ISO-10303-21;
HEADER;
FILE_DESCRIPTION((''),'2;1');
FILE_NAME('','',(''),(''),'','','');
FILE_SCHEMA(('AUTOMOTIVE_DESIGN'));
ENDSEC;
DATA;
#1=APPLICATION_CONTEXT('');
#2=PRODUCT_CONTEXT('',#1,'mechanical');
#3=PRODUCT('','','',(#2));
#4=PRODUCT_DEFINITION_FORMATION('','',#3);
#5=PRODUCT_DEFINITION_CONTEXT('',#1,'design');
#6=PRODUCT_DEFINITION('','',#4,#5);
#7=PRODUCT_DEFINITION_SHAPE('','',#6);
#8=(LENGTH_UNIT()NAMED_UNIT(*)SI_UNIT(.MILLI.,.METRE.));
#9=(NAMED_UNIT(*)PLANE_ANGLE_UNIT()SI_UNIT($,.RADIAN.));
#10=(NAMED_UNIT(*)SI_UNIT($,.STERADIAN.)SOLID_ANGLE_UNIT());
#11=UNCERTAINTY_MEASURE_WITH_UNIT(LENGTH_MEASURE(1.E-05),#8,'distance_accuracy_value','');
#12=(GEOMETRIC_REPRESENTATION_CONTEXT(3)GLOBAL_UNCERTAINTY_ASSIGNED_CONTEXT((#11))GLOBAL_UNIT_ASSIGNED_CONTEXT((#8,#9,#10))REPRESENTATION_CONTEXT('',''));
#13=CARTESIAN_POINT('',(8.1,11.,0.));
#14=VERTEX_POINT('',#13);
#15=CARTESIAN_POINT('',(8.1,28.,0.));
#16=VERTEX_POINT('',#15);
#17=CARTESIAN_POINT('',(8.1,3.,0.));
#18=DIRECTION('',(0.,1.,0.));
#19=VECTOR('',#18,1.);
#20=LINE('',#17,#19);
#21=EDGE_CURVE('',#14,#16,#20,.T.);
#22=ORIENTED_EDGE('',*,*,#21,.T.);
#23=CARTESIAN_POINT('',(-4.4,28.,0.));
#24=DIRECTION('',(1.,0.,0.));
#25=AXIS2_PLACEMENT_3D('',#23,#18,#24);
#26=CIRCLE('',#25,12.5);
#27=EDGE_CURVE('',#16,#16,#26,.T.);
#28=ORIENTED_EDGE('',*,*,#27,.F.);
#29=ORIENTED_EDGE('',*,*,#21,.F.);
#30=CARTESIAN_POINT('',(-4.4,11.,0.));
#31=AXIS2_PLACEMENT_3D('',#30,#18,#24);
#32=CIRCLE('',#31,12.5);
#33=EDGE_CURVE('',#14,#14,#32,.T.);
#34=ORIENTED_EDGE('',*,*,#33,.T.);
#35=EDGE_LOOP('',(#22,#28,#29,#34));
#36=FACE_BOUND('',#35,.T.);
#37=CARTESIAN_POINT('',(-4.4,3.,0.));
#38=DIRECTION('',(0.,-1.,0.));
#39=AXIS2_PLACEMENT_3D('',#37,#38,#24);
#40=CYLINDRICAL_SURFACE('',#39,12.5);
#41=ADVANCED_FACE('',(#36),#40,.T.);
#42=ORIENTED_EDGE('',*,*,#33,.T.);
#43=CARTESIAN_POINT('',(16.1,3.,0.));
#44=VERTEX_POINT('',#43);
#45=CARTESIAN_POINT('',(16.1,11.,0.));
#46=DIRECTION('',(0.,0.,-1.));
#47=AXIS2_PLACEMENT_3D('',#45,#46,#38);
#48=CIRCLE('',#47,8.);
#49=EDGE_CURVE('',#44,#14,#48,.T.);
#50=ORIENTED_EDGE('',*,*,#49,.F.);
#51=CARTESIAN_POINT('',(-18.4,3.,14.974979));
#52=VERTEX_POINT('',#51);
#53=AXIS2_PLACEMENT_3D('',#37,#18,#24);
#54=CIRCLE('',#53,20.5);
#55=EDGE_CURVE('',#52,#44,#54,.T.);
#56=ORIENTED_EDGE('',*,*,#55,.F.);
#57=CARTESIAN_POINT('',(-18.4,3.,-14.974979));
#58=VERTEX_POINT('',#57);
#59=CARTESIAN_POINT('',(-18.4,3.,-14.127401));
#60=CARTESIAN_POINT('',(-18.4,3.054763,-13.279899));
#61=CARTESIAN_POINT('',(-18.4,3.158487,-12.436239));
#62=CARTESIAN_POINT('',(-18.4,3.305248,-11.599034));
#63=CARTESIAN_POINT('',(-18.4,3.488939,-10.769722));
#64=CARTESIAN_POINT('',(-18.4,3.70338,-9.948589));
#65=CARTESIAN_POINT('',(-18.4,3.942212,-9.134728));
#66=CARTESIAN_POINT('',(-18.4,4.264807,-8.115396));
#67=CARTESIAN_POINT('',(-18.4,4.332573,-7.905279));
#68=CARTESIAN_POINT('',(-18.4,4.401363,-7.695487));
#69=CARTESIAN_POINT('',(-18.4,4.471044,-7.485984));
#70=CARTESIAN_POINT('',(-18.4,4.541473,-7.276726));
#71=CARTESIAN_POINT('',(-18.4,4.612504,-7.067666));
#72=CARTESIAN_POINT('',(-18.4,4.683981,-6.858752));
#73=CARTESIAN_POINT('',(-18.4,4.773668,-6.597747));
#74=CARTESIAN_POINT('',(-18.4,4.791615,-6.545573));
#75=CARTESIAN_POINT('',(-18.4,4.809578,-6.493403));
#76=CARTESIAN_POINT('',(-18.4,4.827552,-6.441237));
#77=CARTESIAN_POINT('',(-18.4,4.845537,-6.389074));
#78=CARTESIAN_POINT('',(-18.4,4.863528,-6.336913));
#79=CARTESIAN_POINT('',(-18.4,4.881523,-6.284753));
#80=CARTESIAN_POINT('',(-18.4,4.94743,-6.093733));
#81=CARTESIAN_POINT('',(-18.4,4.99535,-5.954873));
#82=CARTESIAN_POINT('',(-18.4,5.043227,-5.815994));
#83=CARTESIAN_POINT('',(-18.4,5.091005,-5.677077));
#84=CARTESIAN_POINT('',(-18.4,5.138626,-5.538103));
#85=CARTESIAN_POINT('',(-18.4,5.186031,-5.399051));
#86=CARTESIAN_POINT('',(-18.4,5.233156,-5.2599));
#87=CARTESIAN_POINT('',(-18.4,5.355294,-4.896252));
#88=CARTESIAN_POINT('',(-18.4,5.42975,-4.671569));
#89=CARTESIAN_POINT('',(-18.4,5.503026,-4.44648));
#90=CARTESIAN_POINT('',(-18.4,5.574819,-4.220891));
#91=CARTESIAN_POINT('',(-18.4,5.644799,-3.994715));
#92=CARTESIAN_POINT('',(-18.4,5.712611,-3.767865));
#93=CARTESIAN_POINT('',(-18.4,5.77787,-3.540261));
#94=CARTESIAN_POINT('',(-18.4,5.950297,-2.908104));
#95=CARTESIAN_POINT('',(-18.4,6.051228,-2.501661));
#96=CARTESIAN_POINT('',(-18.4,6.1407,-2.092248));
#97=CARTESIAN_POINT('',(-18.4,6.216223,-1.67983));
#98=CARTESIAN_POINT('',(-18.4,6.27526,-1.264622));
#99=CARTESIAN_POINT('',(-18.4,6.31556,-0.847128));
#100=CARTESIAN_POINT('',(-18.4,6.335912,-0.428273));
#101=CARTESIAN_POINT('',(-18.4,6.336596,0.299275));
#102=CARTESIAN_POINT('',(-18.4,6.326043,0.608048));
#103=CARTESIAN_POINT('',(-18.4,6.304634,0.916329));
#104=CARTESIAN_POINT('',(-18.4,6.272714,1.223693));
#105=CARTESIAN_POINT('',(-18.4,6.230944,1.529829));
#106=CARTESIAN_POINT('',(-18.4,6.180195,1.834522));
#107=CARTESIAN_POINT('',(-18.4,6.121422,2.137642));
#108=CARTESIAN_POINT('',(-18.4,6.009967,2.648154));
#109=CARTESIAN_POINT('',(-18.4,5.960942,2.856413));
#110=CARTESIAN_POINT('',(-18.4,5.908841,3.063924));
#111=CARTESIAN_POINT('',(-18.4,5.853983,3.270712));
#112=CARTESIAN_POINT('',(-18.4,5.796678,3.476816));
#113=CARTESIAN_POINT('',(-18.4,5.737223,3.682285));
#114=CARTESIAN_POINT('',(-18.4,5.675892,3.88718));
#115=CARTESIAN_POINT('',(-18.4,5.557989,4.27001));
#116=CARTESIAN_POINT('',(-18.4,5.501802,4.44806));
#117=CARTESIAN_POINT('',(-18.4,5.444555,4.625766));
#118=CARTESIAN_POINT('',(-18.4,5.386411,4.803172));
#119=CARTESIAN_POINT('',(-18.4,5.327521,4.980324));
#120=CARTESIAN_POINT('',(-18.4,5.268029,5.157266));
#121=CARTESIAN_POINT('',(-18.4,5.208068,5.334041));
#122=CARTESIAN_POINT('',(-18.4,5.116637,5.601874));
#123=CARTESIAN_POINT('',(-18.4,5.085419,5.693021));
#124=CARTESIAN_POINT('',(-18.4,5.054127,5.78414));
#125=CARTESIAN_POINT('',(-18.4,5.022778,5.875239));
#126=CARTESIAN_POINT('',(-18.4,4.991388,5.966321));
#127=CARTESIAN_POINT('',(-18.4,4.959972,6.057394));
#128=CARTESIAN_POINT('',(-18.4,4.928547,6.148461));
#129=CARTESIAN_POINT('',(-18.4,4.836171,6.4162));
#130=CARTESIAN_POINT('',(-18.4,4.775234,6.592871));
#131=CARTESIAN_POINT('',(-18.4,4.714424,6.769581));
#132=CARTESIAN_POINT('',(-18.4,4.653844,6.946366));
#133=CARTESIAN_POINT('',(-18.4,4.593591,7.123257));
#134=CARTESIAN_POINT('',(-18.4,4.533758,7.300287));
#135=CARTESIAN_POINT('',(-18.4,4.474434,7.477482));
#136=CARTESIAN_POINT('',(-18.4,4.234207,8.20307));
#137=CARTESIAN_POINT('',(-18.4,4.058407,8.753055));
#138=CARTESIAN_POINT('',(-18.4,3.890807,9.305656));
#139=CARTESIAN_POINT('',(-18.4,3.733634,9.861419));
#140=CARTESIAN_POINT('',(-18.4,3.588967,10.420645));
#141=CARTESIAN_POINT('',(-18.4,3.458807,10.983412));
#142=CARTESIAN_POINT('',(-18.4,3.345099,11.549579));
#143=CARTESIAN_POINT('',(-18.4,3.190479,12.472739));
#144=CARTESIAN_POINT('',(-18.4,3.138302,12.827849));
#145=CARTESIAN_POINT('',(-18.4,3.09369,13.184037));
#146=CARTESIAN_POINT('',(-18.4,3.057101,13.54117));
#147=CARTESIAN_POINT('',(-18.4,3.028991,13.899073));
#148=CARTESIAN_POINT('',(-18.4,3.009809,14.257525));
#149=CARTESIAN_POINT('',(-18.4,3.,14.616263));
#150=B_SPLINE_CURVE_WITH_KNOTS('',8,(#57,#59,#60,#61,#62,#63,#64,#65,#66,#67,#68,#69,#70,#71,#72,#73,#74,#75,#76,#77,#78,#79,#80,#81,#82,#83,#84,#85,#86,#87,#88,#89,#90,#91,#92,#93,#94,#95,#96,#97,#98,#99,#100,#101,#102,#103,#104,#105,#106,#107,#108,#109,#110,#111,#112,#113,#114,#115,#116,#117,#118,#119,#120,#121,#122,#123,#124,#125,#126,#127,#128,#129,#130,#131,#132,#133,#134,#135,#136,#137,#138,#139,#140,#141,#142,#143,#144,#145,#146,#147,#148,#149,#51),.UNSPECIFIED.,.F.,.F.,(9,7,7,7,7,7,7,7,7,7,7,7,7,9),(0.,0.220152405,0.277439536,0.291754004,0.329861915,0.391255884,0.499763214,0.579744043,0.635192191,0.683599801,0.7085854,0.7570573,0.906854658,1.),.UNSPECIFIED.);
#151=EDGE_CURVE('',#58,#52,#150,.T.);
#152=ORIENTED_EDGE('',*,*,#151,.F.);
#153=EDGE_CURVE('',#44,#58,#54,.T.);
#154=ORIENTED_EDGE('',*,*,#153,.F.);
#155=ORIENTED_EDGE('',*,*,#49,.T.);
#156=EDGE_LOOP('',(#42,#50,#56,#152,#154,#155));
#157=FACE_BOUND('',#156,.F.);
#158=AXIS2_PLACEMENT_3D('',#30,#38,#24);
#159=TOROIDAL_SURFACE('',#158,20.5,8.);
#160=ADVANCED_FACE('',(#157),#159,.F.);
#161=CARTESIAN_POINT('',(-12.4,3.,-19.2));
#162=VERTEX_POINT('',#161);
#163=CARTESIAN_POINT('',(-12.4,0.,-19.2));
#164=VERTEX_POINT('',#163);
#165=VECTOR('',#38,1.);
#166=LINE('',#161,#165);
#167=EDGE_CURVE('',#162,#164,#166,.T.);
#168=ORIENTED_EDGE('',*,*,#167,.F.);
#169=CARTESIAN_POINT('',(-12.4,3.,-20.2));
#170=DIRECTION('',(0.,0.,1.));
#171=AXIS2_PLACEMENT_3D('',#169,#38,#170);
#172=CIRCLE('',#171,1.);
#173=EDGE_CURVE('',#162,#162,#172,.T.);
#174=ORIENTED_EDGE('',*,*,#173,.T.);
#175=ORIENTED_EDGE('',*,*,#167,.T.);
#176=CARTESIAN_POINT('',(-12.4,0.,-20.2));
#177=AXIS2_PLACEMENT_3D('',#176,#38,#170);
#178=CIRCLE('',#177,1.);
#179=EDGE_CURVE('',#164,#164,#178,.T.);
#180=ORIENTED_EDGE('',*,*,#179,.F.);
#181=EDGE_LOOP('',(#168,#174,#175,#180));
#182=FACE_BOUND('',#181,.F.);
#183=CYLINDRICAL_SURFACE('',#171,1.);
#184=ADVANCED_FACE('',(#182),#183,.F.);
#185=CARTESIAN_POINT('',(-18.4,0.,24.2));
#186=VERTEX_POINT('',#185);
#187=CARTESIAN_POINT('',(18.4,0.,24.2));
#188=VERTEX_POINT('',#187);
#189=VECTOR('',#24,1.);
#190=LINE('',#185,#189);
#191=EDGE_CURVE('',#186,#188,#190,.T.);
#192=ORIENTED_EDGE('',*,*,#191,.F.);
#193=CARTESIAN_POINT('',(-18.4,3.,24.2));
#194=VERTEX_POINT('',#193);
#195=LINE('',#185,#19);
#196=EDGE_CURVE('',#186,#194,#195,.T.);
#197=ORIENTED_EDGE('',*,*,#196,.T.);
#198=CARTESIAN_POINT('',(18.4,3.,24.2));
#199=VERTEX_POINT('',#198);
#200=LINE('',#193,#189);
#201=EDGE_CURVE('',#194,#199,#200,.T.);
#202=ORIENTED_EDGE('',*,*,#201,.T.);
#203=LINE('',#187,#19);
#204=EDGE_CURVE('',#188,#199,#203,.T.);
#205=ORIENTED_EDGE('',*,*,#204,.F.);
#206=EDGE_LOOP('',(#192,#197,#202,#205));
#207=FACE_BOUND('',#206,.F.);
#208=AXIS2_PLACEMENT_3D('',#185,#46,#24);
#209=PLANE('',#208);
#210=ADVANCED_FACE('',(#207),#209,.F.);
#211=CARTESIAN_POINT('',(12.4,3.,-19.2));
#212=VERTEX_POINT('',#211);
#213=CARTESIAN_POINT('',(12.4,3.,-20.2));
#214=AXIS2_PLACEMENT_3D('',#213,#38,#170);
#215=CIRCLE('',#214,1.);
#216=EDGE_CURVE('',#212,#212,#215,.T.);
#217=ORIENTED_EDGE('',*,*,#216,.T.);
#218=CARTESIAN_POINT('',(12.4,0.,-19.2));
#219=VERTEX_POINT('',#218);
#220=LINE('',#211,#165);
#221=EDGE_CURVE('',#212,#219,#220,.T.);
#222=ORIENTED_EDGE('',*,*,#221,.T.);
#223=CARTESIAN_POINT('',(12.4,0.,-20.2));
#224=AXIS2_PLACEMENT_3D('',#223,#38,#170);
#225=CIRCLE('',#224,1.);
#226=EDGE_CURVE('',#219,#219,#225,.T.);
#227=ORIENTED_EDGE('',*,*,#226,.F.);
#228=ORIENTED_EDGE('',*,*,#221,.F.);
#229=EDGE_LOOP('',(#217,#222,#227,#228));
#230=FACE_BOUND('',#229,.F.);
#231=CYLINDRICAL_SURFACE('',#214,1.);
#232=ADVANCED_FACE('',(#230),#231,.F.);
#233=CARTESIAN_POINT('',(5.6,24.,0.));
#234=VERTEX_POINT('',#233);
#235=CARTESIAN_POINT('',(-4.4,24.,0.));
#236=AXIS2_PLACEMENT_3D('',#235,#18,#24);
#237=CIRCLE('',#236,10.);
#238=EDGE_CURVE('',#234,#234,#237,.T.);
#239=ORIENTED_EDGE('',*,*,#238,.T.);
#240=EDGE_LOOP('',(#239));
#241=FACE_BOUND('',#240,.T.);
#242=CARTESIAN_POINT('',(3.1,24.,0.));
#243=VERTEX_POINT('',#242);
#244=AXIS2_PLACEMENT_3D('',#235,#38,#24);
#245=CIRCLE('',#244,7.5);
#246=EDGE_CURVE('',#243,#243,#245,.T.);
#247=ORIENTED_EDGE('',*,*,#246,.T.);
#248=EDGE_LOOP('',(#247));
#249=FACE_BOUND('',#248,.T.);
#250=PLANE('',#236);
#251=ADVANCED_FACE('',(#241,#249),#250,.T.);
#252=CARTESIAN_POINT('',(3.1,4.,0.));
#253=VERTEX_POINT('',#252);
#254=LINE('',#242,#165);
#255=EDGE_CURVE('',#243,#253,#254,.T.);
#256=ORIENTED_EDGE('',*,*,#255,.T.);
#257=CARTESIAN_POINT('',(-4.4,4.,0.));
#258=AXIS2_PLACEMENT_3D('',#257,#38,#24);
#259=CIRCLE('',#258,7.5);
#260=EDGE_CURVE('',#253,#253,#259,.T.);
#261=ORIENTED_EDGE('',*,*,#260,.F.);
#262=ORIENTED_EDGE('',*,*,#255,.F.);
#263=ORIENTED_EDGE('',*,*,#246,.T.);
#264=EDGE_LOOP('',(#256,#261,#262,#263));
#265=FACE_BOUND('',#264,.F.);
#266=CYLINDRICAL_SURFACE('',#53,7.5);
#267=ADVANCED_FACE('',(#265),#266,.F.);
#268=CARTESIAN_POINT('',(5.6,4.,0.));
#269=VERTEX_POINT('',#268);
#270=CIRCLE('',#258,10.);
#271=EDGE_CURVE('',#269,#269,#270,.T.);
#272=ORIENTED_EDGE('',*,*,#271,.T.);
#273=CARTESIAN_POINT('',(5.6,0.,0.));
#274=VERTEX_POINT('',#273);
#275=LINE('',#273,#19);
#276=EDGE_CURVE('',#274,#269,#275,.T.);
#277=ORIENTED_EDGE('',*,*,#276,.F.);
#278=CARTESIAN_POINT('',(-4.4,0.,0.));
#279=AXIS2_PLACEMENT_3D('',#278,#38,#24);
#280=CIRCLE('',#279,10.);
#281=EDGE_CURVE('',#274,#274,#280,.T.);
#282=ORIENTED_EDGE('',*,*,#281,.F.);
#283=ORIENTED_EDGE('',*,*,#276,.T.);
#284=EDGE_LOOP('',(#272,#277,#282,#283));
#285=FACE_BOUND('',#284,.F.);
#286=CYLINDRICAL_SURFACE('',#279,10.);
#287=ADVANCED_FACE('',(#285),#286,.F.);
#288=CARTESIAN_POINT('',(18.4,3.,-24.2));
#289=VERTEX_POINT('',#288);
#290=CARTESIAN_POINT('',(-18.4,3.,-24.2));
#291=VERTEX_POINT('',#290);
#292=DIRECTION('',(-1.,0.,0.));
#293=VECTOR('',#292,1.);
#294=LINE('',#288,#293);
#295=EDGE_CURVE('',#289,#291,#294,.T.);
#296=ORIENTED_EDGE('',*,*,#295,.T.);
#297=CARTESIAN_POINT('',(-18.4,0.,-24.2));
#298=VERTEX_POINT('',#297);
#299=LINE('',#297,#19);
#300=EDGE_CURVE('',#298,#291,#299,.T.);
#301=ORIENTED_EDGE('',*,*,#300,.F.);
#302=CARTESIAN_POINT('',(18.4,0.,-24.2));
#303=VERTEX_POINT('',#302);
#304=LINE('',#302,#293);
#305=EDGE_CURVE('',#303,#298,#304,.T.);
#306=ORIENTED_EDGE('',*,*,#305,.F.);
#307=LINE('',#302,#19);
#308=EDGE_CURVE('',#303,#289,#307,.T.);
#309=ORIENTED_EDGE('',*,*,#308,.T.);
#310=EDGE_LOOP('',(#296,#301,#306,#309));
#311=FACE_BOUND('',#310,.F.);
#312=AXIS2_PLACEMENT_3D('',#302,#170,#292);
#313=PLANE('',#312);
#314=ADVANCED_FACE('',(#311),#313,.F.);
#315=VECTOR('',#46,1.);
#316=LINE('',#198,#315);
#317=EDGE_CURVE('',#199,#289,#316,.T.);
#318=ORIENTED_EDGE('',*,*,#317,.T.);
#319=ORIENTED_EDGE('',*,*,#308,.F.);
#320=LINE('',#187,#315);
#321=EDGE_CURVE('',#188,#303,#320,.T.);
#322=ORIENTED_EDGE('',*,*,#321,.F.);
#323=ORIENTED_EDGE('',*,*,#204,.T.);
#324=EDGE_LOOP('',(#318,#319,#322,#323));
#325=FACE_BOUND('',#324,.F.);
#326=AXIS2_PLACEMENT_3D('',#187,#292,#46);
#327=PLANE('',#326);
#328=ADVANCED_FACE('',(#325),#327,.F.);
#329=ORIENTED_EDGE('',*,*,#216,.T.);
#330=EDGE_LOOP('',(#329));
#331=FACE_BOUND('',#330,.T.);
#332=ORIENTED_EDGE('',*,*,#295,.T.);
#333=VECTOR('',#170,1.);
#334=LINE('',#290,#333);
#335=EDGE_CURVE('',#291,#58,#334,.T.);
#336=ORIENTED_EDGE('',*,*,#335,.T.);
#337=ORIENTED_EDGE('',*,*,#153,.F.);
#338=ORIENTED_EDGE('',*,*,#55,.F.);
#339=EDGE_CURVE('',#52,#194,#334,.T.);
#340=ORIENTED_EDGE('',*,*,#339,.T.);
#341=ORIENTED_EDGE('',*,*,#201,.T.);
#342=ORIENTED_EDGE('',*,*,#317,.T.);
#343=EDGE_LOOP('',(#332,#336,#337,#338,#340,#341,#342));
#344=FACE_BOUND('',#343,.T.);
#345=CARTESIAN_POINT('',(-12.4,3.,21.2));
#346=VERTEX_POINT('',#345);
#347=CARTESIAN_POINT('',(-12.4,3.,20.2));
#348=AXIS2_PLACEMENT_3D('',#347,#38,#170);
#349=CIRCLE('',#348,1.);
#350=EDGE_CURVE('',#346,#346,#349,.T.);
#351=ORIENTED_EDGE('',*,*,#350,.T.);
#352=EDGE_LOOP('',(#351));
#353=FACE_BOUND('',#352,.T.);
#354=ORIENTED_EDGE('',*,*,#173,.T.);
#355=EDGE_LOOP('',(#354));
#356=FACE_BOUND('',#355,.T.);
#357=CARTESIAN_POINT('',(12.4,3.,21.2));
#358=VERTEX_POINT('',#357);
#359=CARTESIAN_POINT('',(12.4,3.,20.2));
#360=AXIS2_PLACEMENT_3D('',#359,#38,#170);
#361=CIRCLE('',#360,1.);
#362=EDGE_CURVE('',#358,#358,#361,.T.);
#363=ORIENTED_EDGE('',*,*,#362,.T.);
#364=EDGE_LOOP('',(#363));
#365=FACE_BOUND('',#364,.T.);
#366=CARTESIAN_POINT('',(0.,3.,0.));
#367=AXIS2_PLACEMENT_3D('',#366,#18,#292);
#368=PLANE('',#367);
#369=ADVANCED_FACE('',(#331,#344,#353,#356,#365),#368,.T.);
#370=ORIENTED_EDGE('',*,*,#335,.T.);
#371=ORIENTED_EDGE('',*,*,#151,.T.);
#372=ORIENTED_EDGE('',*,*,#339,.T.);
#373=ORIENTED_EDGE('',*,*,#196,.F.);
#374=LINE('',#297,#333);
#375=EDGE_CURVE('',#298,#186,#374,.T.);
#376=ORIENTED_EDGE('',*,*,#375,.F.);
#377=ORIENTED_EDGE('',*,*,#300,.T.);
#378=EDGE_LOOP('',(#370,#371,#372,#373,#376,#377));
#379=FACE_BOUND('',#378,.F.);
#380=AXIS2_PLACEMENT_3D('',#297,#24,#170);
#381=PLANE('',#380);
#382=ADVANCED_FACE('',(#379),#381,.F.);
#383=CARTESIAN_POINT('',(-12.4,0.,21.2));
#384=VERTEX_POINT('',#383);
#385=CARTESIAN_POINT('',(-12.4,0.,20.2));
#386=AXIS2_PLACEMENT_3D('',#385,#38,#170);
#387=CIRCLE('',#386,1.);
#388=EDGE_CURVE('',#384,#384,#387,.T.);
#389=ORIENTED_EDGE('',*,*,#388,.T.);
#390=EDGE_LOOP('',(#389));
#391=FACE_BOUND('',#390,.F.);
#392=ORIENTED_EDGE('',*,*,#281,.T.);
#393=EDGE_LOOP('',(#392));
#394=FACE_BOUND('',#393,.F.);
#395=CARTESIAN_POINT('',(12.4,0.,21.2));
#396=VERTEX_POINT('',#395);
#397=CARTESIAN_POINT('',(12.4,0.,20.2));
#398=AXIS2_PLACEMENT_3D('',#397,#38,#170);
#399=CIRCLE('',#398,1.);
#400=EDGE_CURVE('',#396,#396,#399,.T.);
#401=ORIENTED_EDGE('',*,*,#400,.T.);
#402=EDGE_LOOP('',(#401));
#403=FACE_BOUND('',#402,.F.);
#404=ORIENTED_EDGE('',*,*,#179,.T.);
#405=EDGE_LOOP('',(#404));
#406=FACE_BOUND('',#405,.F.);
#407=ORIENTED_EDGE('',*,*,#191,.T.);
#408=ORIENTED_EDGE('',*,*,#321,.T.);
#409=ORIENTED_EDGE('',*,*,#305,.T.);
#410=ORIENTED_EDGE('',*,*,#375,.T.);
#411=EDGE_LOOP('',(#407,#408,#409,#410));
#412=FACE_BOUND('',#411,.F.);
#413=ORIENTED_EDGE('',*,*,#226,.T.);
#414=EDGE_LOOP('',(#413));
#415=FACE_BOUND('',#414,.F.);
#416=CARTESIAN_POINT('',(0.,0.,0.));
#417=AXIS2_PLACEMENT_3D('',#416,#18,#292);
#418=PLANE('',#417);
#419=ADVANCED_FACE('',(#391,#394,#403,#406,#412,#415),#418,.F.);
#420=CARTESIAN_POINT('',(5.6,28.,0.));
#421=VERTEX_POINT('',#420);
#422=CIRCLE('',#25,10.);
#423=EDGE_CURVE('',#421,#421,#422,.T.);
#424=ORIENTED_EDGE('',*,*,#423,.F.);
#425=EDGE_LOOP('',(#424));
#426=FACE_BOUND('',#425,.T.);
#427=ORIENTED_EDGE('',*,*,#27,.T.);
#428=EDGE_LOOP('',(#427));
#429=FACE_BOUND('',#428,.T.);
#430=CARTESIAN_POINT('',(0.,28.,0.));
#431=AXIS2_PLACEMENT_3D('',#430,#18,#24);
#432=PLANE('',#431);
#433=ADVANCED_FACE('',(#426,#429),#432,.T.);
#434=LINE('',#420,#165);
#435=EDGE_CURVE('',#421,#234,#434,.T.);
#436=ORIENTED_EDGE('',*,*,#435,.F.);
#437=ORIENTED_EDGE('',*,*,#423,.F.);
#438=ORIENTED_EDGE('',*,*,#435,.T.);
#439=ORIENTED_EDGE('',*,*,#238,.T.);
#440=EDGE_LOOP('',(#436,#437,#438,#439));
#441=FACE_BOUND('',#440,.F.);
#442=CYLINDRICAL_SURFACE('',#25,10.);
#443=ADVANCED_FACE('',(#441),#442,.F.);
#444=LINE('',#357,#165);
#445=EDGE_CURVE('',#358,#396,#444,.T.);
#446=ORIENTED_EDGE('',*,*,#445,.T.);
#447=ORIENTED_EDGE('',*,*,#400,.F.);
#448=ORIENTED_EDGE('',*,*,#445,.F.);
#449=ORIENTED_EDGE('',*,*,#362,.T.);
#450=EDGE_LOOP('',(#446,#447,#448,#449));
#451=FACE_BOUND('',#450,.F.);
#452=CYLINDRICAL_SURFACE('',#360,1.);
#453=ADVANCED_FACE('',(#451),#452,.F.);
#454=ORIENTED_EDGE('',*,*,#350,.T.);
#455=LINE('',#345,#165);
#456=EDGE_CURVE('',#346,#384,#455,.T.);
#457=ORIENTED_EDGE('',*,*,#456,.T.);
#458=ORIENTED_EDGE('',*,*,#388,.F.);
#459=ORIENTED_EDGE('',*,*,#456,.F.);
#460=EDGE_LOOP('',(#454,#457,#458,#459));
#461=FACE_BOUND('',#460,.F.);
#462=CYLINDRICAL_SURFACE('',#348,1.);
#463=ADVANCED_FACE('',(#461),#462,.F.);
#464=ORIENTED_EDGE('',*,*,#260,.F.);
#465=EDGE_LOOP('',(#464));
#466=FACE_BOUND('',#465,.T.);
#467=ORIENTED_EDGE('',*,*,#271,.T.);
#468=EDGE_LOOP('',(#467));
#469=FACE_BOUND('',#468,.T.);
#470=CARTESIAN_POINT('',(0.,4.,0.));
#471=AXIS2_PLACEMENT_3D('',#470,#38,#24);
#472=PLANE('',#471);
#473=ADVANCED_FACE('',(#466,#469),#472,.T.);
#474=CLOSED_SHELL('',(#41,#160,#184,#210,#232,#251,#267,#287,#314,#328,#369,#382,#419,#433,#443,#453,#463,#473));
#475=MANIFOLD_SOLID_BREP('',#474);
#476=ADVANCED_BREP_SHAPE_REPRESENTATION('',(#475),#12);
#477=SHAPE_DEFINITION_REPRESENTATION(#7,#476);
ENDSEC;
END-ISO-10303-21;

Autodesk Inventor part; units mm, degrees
ref_plane "YZ Plane" through (0, 0, 0) normal (1, 0, 0) x (0, 1, 0)
ref_plane "XZ Plane" through (0, 0, 0) normal (0, 1, 0) x (-1, 0, 0)
ref_plane "XY Plane" through (0, 0, 0) normal (0, 0, 1) x (1, 0, 0)
sketch "Sketch1" plane through (0, 0, 0) normal (0, 1, 0) x (-1, 0, 0)
  line L0 (18.4, 24.2) -> (-18.4, 24.2)
  line L1 (-18.4, 24.2) -> (-18.4, -24.2)
  line L2 (-18.4, -24.2) -> (18.4, -24.2)
  line L3 (18.4, -24.2) -> (18.4, 24.2)
  point P0 (0, 0)
  point P1 (-18.4, 0)
  point P2 (0, -24.2)
  dimension "d0" = 48.4
  dimension "d1" = 36.8
extrude "Extrusion1" add sketch "Sketch1" along normal blind 3
sketch "Sketch2" plane through (0, 3, 0) normal (0, 1, 0) x (1, 0, 0)
  line L0 (-18.4, -24.2) -> (18.4, -24.2) projected
  line L1 (-18.4, 24.2) -> (-18.4, -24.2) projected
  line L2 (18.4, 24.2) -> (-18.4, 24.2) projected
  line L3 (18.4, -24.2) -> (18.4, 24.2) projected
  point P0 (0, 0)
  point P1 (-12.4, -20.2)
  point P2 (-12.4, 20.2)
  point P3 (12.4, -20.2)
  point P4 (12.4, 20.2)
  dimension "d4" = 4
  dimension "d5" = 6
  dimension "d6" = 6
  dimension "d7" = 4
  dimension "d8" = 6
  dimension "d9" = 4
  dimension "d10" = 6
  dimension "d11" = 4
hole "Hole1" at (-12.4, 3, 20.2) at (-12.4, 3, -20.2) at (12.4, 3, 20.2) at (12.4, 3, -20.2) direction (0, -1, 0) diameter 2 end through all
sketch "Sketch3" plane through (0, 3, 0) normal (0, 1, 0) x (1, 0, 0)
  line L0 (-18.4, 24.2) -> (-18.4, -24.2) projected
  line L1 (-18.4, -24.2) -> (18.4, -24.2) projected
  line L2 (18.4, 24.2) -> (-18.4, 24.2) projected
  circle A0 centre (-4.4, 0) radius 7.5
  circle A1 centre (-4.4, 0) radius 12.5
  point P0 (0, 0)
  dimension "d19" = 14
  dimension "d20" = 24.2
  dimension "d21" = 24.2
  dimension "d22" = 15
  dimension "d23" = 25
extrude "Extrusion2" add sketch "Sketch3" along normal blind 25
sketch "Sketch4" plane through (-4.4, 3, 0) normal (0, 1, 0) x (1, 0, 0)
  circle A0 centre (0, 0) radius 7.5
  point P0 (4.4, 0)
extrude "Extrusion3" cut sketch "Sketch4" against normal blind 35
sketch "Sketch5" plane through (-4.4, 28, 0) normal (0, 1, 0) x (1, 0, 0)
  circle A0 centre (0, 0) radius 10
  point P0 (4.4, 0)
  dimension "d29" = 20
extrude "Extrusion4" cut sketch "Sketch5" against normal blind 4
sketch "Sketch8" plane through (0, 0, 0) normal (0, -1, 0) x (1, 0, 0)
  circle A0 centre (-4.4, 0) radius 7.5 projected
  circle A1 centre (-4.4, 0) radius 10
  point P0 (0, 0)
  dimension "d32" = 20
extrude "Extrusion5" cut sketch "Sketch8" against normal blind 4
fillet "Fillet2" radius 8 1 edges at (-16.9, 3, 0)
equation "\"d20\" = d21"
properties part number "Tube"
